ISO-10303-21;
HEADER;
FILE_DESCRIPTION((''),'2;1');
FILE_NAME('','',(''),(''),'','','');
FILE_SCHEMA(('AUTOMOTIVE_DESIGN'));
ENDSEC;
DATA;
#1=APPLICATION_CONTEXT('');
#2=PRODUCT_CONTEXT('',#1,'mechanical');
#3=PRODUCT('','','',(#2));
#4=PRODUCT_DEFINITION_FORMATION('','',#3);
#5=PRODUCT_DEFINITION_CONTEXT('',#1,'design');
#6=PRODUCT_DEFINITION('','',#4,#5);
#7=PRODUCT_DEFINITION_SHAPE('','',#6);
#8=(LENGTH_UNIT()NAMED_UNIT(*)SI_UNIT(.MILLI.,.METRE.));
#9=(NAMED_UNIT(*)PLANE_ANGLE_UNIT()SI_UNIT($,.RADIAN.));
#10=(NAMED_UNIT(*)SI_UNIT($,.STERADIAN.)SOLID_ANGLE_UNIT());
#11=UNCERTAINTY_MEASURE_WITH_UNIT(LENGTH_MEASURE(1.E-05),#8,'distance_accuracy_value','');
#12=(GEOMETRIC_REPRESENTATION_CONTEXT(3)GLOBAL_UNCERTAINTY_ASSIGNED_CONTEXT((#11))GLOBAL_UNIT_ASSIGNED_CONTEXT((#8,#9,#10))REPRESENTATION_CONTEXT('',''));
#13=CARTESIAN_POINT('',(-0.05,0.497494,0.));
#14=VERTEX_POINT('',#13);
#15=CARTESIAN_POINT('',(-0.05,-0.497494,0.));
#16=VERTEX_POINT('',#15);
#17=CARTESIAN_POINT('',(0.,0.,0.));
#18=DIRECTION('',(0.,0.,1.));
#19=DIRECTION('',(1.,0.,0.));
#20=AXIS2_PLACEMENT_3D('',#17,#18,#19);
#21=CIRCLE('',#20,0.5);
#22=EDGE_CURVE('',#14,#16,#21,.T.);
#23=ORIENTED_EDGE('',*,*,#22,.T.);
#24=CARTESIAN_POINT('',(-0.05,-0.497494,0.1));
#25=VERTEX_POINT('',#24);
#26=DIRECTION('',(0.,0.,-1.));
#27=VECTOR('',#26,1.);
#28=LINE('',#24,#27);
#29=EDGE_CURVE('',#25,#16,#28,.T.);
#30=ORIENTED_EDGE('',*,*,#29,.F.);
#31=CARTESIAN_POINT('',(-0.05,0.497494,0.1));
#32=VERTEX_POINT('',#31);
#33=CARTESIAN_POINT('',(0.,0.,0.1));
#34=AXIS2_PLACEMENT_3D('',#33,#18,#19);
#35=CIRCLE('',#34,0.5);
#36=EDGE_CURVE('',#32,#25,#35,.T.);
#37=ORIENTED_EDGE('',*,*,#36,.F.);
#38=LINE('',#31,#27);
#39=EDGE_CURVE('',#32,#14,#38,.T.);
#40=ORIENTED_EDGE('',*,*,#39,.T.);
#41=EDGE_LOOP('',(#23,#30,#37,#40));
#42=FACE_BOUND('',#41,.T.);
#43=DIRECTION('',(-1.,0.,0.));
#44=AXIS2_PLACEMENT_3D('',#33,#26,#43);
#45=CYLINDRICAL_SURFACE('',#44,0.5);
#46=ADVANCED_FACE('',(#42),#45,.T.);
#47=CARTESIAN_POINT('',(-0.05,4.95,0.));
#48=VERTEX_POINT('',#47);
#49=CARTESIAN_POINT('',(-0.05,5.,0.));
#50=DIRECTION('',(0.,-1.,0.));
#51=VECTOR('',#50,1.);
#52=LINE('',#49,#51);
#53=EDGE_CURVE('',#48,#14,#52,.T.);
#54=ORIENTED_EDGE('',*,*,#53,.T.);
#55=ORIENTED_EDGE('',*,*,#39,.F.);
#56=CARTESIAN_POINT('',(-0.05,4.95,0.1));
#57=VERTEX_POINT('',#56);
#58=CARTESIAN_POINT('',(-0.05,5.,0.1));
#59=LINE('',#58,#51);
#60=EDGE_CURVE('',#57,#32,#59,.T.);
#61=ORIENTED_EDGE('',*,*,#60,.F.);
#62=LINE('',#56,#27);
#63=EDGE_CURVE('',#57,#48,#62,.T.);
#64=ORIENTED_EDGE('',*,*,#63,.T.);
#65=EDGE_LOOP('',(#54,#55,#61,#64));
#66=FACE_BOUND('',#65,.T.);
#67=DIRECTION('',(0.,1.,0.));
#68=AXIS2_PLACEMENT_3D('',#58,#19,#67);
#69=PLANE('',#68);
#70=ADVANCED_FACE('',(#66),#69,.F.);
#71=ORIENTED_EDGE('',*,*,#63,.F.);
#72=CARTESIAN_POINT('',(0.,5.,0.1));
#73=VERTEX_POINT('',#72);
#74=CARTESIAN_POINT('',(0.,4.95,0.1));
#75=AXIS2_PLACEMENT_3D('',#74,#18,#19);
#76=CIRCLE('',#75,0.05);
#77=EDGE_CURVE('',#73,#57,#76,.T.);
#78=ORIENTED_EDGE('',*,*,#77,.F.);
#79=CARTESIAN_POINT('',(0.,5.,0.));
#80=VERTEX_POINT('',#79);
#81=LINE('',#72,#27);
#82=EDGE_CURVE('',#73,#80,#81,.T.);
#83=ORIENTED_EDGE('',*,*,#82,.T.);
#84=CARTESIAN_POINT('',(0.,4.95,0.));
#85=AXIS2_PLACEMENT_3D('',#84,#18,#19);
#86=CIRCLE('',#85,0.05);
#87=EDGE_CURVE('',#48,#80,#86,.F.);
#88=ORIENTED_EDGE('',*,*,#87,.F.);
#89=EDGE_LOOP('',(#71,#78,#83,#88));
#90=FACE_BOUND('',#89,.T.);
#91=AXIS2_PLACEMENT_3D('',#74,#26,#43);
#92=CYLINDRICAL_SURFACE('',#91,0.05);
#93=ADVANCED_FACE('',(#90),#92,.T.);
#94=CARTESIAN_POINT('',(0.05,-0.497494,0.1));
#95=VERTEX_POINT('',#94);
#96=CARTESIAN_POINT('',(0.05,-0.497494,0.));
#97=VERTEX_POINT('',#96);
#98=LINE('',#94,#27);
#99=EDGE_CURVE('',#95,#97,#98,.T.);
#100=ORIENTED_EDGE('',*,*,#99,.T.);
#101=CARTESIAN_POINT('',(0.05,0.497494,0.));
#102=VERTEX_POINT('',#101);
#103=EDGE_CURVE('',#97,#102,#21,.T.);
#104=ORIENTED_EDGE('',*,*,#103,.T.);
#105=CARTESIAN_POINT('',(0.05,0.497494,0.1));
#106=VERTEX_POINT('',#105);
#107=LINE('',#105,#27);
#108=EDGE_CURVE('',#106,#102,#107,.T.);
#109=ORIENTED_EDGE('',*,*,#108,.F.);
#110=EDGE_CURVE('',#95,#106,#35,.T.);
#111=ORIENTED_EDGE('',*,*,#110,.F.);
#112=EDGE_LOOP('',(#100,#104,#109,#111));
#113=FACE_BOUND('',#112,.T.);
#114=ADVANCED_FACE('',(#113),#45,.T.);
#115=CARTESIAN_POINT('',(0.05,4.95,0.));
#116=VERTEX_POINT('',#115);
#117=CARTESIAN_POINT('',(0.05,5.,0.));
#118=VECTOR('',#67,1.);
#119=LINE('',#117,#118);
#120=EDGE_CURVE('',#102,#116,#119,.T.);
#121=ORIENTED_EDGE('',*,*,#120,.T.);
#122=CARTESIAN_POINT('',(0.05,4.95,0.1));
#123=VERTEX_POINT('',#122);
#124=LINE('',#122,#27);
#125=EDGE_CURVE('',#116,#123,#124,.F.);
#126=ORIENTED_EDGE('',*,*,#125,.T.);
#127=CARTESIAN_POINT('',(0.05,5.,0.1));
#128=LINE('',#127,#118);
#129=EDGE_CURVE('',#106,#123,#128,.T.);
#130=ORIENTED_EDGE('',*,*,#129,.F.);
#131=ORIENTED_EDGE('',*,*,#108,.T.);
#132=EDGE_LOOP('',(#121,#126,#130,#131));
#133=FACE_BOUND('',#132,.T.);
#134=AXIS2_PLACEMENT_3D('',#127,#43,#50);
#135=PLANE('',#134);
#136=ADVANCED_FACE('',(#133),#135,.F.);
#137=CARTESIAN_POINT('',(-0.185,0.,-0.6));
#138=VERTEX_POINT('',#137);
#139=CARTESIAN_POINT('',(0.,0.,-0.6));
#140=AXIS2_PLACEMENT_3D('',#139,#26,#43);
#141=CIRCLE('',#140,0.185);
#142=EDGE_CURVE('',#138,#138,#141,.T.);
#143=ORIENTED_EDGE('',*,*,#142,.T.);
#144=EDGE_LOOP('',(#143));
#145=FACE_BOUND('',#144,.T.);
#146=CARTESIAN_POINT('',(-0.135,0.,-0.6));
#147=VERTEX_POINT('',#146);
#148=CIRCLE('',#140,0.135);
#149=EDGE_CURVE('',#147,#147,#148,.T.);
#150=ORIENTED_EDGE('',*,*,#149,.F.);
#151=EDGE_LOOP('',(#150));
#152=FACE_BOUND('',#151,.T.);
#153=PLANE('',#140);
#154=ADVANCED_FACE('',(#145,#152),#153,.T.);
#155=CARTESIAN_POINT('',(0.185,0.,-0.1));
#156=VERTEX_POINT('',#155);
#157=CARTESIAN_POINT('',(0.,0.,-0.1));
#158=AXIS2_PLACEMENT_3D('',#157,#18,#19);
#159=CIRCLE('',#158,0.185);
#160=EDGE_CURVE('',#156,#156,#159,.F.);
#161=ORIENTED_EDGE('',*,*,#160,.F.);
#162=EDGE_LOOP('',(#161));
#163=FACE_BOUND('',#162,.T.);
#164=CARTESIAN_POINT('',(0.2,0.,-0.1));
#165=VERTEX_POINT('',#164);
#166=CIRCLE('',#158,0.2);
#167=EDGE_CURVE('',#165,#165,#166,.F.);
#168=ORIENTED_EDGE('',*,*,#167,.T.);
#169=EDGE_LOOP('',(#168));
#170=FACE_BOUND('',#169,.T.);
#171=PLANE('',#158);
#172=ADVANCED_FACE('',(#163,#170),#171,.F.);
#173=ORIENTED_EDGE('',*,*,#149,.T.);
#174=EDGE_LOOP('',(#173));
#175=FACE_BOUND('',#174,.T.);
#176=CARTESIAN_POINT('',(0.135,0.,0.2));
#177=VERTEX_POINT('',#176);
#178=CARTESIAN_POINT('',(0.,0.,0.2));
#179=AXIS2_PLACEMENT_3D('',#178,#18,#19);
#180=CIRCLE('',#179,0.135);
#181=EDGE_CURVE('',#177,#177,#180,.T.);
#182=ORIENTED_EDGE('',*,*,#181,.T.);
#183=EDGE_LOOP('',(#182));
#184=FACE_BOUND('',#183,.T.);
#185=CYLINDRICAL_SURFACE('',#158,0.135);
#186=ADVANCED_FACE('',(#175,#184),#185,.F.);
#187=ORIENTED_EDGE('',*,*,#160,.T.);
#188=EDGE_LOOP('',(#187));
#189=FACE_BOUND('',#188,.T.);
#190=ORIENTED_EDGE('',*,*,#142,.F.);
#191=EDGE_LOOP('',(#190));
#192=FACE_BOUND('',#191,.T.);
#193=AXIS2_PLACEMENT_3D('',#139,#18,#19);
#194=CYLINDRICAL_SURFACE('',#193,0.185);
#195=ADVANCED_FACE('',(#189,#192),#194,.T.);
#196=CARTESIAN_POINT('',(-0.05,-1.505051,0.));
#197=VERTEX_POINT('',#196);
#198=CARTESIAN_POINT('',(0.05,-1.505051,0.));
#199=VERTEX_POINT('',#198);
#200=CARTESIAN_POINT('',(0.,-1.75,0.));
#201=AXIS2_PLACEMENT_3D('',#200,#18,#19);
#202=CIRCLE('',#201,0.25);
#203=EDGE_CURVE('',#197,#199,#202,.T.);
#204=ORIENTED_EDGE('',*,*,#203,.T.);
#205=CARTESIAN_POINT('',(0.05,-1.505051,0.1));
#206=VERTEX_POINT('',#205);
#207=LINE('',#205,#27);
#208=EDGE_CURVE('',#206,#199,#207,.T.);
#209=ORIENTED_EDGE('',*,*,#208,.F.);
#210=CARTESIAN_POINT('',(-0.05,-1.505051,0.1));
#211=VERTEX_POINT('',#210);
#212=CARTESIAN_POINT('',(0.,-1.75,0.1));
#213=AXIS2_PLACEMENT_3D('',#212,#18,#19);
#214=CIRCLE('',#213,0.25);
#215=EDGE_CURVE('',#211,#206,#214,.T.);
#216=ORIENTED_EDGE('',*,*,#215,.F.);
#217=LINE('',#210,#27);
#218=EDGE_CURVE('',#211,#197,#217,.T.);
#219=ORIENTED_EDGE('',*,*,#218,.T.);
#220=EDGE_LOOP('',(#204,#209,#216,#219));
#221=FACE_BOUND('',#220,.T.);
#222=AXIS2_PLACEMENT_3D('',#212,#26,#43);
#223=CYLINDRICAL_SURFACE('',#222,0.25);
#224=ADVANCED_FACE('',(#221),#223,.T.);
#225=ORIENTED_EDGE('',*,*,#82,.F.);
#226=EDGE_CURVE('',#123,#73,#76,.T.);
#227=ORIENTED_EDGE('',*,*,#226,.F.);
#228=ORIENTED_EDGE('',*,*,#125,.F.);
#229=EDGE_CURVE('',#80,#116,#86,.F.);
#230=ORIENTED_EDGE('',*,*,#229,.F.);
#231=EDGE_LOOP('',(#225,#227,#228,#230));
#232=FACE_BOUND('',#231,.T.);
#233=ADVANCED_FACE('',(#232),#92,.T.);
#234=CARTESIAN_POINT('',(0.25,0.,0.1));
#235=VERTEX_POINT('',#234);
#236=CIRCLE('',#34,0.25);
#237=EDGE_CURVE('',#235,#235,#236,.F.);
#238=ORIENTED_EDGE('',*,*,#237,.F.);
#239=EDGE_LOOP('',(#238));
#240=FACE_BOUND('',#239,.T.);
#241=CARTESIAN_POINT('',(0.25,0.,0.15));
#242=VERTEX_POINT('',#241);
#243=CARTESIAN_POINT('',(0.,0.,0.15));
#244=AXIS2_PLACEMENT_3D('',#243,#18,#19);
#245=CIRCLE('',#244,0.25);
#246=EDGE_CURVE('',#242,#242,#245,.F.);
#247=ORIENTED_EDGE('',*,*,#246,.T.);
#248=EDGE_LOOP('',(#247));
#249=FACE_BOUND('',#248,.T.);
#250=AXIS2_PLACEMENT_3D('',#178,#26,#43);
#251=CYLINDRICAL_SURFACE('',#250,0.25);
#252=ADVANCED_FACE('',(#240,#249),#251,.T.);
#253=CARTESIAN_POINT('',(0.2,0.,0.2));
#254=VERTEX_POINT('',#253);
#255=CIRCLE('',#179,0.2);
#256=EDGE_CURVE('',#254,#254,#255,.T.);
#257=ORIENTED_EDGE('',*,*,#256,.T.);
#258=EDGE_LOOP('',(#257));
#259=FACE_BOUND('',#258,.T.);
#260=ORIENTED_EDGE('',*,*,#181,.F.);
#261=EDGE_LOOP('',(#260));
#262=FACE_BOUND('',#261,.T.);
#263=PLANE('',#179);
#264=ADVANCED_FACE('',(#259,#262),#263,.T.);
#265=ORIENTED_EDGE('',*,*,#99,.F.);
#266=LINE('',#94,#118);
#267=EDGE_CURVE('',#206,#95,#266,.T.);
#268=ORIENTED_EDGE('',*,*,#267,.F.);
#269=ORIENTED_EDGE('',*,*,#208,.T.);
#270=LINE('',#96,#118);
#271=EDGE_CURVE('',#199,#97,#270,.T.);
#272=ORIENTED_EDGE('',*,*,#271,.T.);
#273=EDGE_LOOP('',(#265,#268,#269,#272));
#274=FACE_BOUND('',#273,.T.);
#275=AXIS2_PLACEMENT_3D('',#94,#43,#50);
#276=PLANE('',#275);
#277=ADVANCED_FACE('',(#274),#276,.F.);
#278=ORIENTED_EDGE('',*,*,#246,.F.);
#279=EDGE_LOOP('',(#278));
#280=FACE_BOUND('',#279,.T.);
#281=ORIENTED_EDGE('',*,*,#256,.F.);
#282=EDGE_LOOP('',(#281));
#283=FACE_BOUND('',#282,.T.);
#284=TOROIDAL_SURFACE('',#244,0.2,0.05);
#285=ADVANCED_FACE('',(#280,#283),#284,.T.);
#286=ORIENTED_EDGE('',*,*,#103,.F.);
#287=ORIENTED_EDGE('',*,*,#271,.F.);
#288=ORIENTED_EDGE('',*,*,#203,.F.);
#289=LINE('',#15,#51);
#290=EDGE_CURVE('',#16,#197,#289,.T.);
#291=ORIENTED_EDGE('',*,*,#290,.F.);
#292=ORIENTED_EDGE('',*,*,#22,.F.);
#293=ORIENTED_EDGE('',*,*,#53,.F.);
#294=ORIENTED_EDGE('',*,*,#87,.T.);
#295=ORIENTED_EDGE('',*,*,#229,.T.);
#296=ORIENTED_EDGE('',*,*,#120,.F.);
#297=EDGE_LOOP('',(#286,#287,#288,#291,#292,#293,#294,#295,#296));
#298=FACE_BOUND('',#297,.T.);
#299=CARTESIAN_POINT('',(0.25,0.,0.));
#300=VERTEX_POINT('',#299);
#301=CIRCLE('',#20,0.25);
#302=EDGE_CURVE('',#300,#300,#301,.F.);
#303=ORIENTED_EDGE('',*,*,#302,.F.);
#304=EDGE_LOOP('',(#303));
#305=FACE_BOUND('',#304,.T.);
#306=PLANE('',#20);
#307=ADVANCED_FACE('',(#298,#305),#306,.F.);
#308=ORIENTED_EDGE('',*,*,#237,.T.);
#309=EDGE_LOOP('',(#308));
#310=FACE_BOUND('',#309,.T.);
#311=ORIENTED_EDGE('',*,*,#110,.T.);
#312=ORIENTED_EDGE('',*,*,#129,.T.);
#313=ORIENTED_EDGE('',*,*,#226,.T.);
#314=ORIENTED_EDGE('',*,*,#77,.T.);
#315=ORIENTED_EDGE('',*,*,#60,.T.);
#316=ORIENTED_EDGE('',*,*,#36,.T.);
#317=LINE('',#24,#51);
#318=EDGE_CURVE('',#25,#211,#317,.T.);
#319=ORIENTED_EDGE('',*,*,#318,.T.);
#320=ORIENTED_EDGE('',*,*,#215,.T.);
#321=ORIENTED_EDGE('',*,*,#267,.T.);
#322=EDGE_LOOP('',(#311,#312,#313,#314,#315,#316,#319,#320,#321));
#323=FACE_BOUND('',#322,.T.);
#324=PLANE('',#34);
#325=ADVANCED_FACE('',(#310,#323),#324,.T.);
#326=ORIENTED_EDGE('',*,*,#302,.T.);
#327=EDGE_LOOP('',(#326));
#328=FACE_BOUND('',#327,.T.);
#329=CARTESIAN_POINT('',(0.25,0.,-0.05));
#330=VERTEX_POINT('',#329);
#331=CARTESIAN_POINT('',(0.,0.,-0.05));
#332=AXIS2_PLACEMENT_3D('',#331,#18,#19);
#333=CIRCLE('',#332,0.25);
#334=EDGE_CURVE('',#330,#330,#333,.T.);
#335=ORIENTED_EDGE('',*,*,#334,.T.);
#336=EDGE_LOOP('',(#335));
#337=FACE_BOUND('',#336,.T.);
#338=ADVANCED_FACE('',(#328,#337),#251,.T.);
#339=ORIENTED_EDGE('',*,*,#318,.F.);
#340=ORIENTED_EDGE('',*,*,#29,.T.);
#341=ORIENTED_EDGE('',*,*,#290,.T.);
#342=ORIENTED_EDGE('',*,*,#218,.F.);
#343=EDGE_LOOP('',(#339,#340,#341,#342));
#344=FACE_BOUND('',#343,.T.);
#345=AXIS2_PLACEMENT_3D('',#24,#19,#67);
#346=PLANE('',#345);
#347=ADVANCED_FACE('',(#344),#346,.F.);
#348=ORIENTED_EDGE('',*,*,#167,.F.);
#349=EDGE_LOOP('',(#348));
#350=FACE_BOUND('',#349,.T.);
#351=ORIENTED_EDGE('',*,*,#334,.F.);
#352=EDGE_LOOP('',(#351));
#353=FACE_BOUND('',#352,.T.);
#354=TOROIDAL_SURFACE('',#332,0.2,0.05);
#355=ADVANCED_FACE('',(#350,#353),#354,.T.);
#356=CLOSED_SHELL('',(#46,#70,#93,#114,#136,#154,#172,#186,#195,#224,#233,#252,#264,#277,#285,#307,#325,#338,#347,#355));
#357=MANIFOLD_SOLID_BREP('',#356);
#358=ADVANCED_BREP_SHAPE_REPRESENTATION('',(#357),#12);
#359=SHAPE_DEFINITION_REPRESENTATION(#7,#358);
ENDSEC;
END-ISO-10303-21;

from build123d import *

# Parameters (mm, degrees)
BOSS_EXTRUDE1_DEPTH      = 0.1
FILLET1_R                = 0.05
BOSS_EXTRUDE2_DEPTH      = 0.2
BOSS_EXTRUDE2_DEPTH_BACK = 0.1
SKETCH2_R                = 0.25
CUT_EXTRUDE2_DEPTH       = 6.028916384
CUT_EXTRUDE2_DEPTH_BACK  = 6.028916384
SKETCH3_R                = 0.135
FILLET2_R                = 0.05
SKETCH4_R                = 0.185
SKETCH4_R_2              = 0.135
BOSS_EXTRUDE3_DEPTH      = 0.5


with BuildPart() as part:
    # Sketch1 → Boss-Extrude1 (new body)
    with BuildSketch(Plane.XY):
        with BuildLine():
            Line((-0.05, 5), (0.05, 5))
            Line((0.05, 5), (0.05, 0.497493719))
            ThreePointArc((0.05, 0.497493719), (0.5, 0), (0.05, -0.497493719))
            Line((0.05, -0.497493719), (0.05, -1.505051026))
            ThreePointArc((0.05, -1.505051026), (0, -2), (-0.05, -1.505051026))
            Line((-0.05, -1.505051026), (-0.05, -0.497493719))
            ThreePointArc((-0.05, -0.497493719), (-0.5, 0), (-0.05, 0.497493719))
            Line((-0.05, 0.497493719), (-0.05, 5))
        make_face()
    extrude(amount=BOSS_EXTRUDE1_DEPTH)

    # Fillet1
    fillet1_edges = [part.edges().sort_by_distance(p)[0] for p in [
        (-0.05, 5, 0.05),
        (0.05, 5, 0.05),
    ]]
    fillet(fillet1_edges, radius=FILLET1_R - 0.0001)  # a hair under: the kernel refuses the full size

    # Sketch2 → Boss-Extrude2 (add, two sides: drawn at the far end of the back side and taken through both)
    with BuildSketch(Plane.XY.offset(-BOSS_EXTRUDE2_DEPTH_BACK)):
        Circle(SKETCH2_R)
    extrude(amount=BOSS_EXTRUDE2_DEPTH + BOSS_EXTRUDE2_DEPTH_BACK)

    # Sketch3 → Cut-Extrude2 (cut, two sides: drawn at the far end of the back side and taken through both)
    with BuildSketch(Plane.XY.offset(-CUT_EXTRUDE2_DEPTH_BACK)):
        Circle(SKETCH3_R)
    extrude(amount=CUT_EXTRUDE2_DEPTH + CUT_EXTRUDE2_DEPTH_BACK, mode=Mode.SUBTRACT)

    # Fillet2
    fillet2_edges = [part.edges().sort_by_distance(p)[0] for p in [
        (-0.25, 0, -0.1),
        (-0.25, 0, 0.2),
    ]]
    fillet(fillet2_edges, radius=FILLET2_R)

    # Sketch4 → Boss-Extrude3 (add)
    with BuildSketch(Plane(origin=(0, 0, -0.1), x_dir=(-1, 0, 0), z_dir=(0, 0, -1))):
        with Locations(Location((0, 0, 0), (0, 0, 180))):
            Circle(SKETCH4_R)
        with Locations(Location((0, 0, 0), (0, 0, 180))):
            Circle(SKETCH4_R_2, mode=Mode.SUBTRACT)
    extrude(amount=BOSS_EXTRUDE3_DEPTH)


solid = part.part
